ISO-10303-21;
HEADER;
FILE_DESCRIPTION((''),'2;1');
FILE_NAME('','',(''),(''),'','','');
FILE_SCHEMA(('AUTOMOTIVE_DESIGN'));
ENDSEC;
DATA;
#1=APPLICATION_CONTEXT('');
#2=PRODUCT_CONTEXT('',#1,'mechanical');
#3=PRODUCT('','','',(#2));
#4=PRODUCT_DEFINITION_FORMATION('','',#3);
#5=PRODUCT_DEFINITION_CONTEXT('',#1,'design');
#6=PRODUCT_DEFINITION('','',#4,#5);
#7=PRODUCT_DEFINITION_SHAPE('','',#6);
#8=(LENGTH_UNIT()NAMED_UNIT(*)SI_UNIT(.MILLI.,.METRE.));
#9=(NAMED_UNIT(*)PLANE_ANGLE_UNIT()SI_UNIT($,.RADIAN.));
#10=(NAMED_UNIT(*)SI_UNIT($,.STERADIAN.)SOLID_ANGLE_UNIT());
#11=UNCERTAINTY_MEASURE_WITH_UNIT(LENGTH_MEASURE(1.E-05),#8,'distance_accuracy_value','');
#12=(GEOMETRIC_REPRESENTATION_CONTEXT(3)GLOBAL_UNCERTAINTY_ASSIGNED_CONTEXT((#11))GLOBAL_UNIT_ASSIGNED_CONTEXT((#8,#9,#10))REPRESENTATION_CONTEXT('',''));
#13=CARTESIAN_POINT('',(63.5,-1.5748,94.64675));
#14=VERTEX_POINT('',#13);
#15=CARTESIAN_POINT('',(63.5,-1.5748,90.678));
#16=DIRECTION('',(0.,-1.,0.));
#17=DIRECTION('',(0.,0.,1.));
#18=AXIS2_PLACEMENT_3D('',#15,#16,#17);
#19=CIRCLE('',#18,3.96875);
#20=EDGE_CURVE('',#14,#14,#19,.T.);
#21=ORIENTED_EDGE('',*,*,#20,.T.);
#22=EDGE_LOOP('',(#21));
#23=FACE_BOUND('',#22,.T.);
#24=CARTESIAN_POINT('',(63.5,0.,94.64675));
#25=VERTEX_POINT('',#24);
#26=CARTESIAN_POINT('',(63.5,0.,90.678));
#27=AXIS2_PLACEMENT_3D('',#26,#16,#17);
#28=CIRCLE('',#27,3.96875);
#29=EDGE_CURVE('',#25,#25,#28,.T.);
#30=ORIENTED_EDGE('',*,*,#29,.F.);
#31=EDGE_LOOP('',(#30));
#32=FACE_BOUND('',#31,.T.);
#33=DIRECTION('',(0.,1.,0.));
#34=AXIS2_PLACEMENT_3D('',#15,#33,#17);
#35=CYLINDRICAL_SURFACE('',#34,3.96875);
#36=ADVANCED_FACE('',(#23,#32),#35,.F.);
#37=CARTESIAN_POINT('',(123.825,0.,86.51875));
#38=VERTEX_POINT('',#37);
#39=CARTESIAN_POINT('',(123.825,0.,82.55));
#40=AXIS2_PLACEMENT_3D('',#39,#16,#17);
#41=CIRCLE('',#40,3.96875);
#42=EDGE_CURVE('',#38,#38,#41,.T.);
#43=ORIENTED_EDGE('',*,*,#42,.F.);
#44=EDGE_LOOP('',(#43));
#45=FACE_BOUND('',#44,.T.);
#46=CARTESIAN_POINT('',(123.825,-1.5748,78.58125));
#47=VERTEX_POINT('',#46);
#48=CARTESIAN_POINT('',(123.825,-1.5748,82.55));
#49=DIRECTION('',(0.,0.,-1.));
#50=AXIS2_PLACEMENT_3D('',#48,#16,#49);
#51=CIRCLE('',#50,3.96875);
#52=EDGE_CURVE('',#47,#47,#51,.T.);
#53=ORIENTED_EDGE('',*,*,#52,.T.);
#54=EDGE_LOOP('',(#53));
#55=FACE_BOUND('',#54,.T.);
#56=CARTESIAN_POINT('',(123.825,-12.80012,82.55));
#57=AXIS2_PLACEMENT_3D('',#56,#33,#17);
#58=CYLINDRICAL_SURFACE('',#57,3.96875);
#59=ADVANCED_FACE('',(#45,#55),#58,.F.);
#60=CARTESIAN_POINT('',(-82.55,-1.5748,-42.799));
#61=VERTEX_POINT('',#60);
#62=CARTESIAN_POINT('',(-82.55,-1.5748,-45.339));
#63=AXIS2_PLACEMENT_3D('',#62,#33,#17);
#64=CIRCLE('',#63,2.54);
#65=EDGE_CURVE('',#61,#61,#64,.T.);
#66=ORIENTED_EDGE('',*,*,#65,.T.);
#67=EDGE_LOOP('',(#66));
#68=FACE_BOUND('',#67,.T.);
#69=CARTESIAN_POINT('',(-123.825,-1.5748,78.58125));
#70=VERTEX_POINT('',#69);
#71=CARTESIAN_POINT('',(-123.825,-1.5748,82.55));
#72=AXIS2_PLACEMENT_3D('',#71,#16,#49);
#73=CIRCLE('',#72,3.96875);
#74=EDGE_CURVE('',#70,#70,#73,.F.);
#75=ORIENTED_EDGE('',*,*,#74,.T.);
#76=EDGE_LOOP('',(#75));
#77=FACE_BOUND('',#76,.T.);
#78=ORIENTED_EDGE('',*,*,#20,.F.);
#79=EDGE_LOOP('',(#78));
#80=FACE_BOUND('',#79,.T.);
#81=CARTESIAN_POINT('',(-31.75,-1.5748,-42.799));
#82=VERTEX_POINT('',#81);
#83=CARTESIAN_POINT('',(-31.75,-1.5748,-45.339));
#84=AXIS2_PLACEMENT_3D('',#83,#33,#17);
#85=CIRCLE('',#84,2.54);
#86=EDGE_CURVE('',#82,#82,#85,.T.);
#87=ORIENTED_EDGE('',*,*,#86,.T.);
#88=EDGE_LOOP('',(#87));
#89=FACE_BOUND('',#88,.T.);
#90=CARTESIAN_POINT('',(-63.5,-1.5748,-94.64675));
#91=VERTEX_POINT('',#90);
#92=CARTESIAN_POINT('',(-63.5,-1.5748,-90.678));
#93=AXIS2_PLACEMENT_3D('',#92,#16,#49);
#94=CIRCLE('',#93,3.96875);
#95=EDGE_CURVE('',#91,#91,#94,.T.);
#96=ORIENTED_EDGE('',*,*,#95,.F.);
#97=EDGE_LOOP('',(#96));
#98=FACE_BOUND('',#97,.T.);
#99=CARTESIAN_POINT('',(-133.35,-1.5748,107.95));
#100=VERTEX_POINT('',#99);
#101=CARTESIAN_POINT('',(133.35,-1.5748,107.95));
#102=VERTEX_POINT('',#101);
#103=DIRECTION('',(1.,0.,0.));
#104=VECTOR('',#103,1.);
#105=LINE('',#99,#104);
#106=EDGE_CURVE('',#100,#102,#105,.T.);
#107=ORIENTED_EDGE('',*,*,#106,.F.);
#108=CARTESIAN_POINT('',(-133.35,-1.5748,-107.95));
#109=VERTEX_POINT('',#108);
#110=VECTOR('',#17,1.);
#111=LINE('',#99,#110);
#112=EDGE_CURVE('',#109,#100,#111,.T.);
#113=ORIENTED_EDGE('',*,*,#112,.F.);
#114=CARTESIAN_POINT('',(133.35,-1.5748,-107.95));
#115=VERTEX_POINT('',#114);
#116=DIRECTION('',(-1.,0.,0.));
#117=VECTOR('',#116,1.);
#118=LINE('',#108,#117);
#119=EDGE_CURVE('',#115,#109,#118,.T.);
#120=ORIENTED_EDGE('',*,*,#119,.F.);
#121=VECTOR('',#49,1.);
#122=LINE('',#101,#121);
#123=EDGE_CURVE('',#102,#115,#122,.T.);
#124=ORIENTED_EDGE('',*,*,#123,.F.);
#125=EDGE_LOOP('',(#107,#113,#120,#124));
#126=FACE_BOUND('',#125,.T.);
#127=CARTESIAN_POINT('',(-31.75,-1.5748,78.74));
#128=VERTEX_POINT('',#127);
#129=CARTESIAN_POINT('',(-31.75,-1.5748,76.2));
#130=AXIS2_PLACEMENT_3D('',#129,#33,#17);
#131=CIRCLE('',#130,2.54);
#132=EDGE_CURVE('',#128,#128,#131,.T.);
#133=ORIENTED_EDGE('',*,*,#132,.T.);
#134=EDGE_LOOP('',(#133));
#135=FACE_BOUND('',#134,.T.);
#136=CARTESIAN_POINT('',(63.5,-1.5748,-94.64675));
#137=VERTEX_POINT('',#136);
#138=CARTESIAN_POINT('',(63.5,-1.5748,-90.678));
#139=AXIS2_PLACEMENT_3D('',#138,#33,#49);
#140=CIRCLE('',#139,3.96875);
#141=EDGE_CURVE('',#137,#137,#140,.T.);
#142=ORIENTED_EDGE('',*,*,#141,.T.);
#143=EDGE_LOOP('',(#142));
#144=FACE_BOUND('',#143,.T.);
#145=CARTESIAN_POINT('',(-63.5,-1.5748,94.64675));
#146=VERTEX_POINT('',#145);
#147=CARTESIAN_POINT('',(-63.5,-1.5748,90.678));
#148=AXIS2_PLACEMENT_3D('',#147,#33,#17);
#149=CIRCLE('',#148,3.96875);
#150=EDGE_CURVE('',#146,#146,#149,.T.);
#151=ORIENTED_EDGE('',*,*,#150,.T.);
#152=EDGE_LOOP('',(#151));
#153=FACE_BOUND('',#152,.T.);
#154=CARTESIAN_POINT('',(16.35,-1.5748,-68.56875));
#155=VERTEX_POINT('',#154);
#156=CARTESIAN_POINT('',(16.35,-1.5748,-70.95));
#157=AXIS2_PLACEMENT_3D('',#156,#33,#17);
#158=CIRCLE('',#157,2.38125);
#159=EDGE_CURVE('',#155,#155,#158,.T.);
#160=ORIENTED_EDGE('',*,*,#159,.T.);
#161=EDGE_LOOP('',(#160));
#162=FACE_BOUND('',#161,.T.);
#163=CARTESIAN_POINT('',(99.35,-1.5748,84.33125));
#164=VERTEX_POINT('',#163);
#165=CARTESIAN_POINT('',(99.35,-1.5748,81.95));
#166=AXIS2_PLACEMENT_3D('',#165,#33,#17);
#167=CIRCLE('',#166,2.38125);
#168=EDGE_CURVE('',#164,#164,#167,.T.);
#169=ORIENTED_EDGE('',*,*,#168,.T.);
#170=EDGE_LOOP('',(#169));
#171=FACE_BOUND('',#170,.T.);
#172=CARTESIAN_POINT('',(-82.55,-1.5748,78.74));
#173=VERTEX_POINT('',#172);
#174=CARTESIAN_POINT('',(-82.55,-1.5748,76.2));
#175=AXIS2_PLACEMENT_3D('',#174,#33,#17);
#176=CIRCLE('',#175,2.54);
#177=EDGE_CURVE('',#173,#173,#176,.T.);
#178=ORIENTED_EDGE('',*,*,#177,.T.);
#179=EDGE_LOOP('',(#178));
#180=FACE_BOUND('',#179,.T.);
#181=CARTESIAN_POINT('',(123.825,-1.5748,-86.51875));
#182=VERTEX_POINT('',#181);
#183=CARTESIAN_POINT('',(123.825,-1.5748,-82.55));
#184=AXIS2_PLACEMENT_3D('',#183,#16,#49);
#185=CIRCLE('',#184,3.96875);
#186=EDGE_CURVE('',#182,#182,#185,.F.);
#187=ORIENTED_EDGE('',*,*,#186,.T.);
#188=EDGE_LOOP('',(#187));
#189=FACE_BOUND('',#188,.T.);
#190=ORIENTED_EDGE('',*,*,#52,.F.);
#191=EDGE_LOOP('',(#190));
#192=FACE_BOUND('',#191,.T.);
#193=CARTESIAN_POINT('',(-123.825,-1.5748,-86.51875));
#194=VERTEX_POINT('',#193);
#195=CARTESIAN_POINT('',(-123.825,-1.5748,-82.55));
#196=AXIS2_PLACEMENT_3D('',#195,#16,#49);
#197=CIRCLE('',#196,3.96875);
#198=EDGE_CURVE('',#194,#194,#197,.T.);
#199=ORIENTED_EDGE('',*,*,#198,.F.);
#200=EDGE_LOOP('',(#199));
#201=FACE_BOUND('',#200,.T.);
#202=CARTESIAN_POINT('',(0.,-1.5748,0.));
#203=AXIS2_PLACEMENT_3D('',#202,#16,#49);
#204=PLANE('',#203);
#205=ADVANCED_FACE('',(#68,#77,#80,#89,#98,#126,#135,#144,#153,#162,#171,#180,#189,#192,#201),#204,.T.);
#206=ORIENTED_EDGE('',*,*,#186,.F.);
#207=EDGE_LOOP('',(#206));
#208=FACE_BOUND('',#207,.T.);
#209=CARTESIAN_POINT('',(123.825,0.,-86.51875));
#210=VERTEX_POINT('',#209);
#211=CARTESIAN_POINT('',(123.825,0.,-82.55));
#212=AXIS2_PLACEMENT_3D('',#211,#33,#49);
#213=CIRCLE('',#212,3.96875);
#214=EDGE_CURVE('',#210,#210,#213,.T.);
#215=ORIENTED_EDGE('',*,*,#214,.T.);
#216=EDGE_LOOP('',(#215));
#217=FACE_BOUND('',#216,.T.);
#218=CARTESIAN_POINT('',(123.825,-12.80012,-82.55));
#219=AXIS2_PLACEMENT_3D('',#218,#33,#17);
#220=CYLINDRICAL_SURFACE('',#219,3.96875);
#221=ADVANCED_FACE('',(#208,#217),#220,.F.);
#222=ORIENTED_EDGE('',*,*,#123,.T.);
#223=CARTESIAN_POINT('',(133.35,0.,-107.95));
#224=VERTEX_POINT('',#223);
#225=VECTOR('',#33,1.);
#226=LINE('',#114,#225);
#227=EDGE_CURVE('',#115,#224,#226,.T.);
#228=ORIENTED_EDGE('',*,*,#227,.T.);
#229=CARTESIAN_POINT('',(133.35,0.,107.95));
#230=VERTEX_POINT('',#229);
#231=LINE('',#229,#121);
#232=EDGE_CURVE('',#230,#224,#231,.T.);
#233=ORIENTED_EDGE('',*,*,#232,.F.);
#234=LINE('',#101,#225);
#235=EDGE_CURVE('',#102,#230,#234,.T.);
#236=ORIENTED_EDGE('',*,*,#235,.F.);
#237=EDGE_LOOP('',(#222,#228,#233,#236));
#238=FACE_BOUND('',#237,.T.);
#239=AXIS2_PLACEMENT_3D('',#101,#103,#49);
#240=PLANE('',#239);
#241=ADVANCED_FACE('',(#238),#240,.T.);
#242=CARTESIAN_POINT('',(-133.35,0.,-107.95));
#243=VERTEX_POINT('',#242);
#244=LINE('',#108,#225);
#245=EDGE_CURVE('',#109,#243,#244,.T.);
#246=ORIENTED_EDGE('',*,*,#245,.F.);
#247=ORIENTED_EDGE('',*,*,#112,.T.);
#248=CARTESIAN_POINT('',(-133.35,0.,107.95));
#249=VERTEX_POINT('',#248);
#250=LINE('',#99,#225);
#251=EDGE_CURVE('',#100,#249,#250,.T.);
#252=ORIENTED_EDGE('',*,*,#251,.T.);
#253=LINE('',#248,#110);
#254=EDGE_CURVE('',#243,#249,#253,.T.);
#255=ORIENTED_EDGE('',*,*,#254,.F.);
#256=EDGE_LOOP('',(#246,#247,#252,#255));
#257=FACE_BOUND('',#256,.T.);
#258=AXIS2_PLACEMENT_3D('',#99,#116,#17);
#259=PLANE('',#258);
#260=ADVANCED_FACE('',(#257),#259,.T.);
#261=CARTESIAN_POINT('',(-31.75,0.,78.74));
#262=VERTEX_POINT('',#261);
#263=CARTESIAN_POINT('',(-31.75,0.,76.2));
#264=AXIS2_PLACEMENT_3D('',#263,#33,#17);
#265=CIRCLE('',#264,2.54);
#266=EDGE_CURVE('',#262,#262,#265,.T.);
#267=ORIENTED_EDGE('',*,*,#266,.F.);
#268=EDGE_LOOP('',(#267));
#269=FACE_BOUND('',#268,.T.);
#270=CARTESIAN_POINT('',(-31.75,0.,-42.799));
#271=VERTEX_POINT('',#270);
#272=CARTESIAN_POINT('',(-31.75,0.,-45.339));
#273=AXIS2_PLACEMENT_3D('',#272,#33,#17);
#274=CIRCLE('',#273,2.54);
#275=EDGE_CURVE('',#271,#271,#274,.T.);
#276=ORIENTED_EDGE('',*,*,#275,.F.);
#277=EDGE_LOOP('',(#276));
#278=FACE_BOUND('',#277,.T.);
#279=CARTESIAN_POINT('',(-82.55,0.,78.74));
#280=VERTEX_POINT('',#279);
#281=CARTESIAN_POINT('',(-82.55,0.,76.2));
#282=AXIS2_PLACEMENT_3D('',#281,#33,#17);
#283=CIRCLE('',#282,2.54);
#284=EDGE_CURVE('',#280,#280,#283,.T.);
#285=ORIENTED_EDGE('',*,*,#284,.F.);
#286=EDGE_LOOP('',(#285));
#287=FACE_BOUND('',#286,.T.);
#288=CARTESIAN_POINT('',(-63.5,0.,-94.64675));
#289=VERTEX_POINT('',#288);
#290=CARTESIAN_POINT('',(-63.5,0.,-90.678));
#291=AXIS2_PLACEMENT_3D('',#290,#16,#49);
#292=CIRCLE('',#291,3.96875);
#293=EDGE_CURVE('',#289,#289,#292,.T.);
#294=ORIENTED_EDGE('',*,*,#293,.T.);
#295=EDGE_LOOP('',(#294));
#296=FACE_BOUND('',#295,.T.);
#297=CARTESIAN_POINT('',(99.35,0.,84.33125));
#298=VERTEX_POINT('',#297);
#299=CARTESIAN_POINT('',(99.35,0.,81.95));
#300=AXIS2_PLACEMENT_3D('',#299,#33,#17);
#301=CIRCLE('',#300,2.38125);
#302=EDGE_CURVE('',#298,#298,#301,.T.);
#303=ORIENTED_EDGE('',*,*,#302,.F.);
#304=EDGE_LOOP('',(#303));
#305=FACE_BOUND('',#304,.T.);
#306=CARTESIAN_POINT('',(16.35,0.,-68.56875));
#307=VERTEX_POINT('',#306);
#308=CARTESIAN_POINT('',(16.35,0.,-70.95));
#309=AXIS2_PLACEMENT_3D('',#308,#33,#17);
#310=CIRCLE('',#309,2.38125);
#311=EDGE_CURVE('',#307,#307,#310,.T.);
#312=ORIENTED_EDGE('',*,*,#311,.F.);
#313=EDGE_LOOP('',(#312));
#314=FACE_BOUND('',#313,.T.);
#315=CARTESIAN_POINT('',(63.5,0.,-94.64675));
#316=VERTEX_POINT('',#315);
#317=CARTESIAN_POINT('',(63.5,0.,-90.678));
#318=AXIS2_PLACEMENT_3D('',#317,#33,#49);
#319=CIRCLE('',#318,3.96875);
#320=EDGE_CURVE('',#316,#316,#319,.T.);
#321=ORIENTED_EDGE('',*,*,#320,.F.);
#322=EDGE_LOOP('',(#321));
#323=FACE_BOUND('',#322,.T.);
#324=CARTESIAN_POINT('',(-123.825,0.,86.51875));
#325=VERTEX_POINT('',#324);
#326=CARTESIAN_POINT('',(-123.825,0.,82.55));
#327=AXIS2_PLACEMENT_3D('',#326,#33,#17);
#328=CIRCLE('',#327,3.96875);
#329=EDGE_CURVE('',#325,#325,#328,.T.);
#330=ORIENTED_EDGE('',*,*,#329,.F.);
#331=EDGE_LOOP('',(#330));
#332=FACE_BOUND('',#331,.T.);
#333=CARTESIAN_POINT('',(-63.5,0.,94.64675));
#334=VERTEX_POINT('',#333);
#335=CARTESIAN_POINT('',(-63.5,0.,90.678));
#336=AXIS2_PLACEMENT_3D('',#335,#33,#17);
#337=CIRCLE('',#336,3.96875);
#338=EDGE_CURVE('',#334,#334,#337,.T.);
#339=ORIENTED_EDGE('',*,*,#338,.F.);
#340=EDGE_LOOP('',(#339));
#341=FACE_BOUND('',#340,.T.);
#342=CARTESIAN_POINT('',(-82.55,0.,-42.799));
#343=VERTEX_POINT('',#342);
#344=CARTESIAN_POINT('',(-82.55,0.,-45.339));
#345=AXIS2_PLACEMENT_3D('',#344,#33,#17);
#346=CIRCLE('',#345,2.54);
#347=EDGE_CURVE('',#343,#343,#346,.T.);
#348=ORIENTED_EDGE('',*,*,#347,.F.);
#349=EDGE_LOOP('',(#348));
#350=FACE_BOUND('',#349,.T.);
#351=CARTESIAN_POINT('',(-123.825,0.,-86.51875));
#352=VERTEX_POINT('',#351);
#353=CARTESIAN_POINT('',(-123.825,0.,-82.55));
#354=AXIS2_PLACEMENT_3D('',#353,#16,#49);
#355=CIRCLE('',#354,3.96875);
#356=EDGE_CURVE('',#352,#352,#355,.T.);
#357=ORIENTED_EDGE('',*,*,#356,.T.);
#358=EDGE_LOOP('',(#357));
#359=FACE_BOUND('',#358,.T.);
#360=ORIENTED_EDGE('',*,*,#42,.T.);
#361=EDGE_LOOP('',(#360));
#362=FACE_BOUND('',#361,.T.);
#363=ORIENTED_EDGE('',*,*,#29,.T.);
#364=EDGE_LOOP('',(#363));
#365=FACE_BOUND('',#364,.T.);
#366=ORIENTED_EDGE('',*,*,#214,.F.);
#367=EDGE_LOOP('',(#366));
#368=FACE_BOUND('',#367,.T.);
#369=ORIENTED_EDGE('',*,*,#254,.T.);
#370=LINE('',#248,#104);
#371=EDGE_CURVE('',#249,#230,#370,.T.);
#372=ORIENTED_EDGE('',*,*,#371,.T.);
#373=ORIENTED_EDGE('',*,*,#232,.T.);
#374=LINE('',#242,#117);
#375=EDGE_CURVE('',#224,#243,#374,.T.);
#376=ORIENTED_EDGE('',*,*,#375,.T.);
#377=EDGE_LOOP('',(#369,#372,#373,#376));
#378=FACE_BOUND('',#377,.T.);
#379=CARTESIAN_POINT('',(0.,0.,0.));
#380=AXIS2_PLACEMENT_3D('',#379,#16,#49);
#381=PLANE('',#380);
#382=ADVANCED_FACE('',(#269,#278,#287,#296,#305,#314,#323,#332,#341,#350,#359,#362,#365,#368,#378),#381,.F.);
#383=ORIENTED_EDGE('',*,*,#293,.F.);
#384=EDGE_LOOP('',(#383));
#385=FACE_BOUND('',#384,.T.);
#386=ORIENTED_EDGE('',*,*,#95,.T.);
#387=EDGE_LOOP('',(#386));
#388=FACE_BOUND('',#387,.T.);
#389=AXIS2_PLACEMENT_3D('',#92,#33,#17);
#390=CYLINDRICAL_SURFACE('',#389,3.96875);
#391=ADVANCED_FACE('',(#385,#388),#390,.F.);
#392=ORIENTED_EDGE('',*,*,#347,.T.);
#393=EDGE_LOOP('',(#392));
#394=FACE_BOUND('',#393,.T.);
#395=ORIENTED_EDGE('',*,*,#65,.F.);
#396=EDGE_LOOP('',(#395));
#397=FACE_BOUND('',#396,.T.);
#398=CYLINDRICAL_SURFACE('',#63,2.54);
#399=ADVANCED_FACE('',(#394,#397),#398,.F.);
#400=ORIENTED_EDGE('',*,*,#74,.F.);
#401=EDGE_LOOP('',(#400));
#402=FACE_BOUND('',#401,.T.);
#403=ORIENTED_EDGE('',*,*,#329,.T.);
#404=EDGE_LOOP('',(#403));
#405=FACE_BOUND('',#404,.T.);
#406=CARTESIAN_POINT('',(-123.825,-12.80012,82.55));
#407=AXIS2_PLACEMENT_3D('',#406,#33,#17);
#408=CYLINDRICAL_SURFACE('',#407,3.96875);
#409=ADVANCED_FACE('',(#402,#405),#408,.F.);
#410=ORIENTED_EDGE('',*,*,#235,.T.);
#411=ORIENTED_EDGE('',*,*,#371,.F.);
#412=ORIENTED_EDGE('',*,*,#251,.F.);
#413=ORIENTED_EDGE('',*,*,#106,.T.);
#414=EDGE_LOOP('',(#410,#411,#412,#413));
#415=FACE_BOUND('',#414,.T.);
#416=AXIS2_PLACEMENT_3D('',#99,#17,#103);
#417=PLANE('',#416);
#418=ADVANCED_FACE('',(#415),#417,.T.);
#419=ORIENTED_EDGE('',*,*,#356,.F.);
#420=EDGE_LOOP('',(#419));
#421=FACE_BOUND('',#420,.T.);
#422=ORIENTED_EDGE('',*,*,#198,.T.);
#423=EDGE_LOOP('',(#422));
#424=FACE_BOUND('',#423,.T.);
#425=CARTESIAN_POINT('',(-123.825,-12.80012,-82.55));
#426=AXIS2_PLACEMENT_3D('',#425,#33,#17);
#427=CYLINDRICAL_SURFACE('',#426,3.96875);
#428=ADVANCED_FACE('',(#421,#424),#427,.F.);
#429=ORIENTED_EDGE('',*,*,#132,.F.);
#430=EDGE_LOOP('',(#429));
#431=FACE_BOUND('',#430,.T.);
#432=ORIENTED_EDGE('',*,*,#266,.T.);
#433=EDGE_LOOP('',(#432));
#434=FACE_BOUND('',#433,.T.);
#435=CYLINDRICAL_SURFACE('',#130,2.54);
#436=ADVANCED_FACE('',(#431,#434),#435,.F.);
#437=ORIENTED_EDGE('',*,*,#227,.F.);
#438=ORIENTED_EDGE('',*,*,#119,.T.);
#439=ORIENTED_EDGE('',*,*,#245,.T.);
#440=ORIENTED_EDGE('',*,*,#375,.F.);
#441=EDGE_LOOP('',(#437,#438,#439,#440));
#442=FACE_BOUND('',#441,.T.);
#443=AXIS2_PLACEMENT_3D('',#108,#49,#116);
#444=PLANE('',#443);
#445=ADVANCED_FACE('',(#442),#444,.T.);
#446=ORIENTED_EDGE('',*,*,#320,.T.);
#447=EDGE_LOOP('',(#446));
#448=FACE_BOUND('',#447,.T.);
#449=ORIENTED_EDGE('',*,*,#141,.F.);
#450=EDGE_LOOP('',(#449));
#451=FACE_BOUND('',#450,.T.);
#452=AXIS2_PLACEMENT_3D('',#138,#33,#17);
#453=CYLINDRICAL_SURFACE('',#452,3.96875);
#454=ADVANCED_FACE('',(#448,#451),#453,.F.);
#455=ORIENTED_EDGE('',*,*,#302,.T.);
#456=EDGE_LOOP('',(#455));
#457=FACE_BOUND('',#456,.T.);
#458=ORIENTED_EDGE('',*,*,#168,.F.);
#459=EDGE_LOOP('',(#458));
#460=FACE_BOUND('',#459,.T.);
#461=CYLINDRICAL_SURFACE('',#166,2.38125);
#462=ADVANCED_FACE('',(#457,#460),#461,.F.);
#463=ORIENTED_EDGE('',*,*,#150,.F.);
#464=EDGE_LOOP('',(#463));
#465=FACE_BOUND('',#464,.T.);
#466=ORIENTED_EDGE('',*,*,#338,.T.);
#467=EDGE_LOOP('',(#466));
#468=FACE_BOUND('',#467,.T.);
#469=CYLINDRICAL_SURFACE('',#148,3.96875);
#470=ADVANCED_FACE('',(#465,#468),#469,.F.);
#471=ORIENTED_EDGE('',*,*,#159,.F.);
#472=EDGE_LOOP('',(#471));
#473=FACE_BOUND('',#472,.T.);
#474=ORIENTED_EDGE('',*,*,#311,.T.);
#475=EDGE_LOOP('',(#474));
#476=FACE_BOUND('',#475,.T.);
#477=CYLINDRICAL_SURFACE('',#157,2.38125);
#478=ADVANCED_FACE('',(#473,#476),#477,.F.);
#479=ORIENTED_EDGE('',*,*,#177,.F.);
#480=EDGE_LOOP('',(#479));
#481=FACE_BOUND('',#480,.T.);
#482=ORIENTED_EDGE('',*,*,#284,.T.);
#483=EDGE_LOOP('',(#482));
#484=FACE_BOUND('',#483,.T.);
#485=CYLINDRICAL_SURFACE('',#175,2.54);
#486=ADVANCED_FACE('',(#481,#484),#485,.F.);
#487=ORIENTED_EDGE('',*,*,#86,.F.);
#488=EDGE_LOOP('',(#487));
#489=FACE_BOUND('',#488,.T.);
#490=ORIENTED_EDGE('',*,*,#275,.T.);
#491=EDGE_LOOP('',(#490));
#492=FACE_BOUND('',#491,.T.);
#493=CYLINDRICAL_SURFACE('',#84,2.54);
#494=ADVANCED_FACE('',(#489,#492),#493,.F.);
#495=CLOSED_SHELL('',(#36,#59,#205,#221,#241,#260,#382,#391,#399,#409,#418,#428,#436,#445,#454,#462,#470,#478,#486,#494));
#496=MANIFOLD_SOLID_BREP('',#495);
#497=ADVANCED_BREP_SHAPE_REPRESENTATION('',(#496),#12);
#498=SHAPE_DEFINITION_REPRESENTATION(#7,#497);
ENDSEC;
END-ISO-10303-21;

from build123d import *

# Parameters (mm, degrees)
SKETCH1_W               = 266.7
SKETCH1_H               = 215.9
BASE_FLANGE1_DEPTH      = 1.5748
SKETCH6_R               = 3.96875
CUT_EXTRUDE1_DEPTH      = 1.5748
SKETCH7_R               = 3.96875
CUT_EXTRUDE2_DEPTH      = 172.574779601
MIRROR2_COPY_1_SKETCH_R = 3.96875
MIRROR2_COPY_1_DEPTH    = 1.5748
MIRROR2_COPY_2_SKETCH_R = 3.96875
MIRROR2_COPY_2_DEPTH    = 172.574779601
SKETCH8_R               = 2.54
CUT_EXTRUDE3_DEPTH      = 172.574779601
SKETCH9_R               = 2.38125
CUT_EXTRUDE4_DEPTH      = 172.574779601


# Sheet-metal steps are written as plain solids
with BuildPart() as part:
    # Sketch1 → Base-Flange1 (new body)
    with BuildSketch(Plane(origin=(0, 0, 0), x_dir=(1, 0, 0), z_dir=(0, 1, 0))):
        Rectangle(SKETCH1_W, SKETCH1_H)
    extrude(amount=-BASE_FLANGE1_DEPTH)

    # Sketch6 → Cut-Extrude1 (cut)
    with BuildSketch(Plane(origin=(0, 0, 0), x_dir=(1, 0, 0), z_dir=(0, 1, 0))):
        with Locations(Location((-123.825, -82.55, 0), (0, 0, 270))):
            Circle(SKETCH6_R)
    cut_extrude1 = extrude(amount=-CUT_EXTRUDE1_DEPTH, mode=Mode.SUBTRACT)

    # Sketch7 → Cut-Extrude2 (cut, through all)
    with BuildSketch(Plane(origin=(0, 0, 0), x_dir=(1, 0, 0), z_dir=(0, 1, 0))):
        with Locations(Location((-63.5, -90.678, 0), (0, 0, 270))):
            Circle(SKETCH7_R)
    cut_extrude2 = extrude(amount=-CUT_EXTRUDE2_DEPTH, mode=Mode.SUBTRACT)

    # Mirror1: Cut-Extrude1, Cut-Extrude2 across plane
    add(cut_extrude1.mirror(Plane(origin=(0, 0, 0), x_dir=(0, 0, 1), z_dir=(1, 0, 0))), mode=Mode.SUBTRACT)
    add(cut_extrude2.mirror(Plane(origin=(0, 0, 0), x_dir=(0, 0, 1), z_dir=(1, 0, 0))), mode=Mode.SUBTRACT)

    # Mirror2: Cut-Extrude1, Cut-Extrude2 across plane
    add(cut_extrude1.mirror(Plane.XY), mode=Mode.SUBTRACT)
    add(cut_extrude2.mirror(Plane.XY), mode=Mode.SUBTRACT)

    # Mirror2 copy 1 sketch → Mirror2 copy 1 (cut)
    with BuildSketch(Plane(origin=(0, 0, 0), x_dir=(-1, 0, 0), z_dir=(0, 1, 0))):
        with Locations(Location((-123.825, -82.55, 0), (0, 0, 270))):
            Circle(MIRROR2_COPY_1_SKETCH_R)
    extrude(amount=-MIRROR2_COPY_1_DEPTH, mode=Mode.SUBTRACT)

    # Mirror2 copy 2 sketch → Mirror2 copy 2 (cut, through all)
    with BuildSketch(Plane(origin=(0, 0, 0), x_dir=(-1, 0, 0), z_dir=(0, 1, 0))):
        with Locations(Location((-63.5, -90.678, 0), (0, 0, 270))):
            Circle(MIRROR2_COPY_2_SKETCH_R)
    extrude(amount=-MIRROR2_COPY_2_DEPTH, mode=Mode.SUBTRACT)

    # Sketch8 → Cut-Extrude3 (cut, through all)
    with BuildSketch(Plane(origin=(0, 0, 0), x_dir=(1, 0, 0), z_dir=(0, 1, 0))):
        with Locations(Location((-82.55, -76.2, 0), (0, 0, 270))):
            Circle(SKETCH8_R)
        with Locations(Location((-31.75, -76.2, 0), (0, 0, 270))):
            Circle(SKETCH8_R)
        with Locations(Location((-82.55, 45.339, 0), (0, 0, 270))):
            Circle(SKETCH8_R)
        with Locations(Location((-31.75, 45.339, 0), (0, 0, 270))):
            Circle(SKETCH8_R)
    extrude(amount=-CUT_EXTRUDE3_DEPTH, mode=Mode.SUBTRACT)

    # Sketch9 → Cut-Extrude4 (cut, through all)
    with BuildSketch(Plane(origin=(0, 0, 0), x_dir=(1, 0, 0), z_dir=(0, 1, 0))):
        with Locations(Location((99.35, -81.95, 0), (0, 0, 270))):
            Circle(SKETCH9_R)
        with Locations(Location((16.35, 70.95, 0), (0, 0, 270))):
            Circle(SKETCH9_R)
    extrude(amount=-CUT_EXTRUDE4_DEPTH, mode=Mode.SUBTRACT)


solid = part.part
